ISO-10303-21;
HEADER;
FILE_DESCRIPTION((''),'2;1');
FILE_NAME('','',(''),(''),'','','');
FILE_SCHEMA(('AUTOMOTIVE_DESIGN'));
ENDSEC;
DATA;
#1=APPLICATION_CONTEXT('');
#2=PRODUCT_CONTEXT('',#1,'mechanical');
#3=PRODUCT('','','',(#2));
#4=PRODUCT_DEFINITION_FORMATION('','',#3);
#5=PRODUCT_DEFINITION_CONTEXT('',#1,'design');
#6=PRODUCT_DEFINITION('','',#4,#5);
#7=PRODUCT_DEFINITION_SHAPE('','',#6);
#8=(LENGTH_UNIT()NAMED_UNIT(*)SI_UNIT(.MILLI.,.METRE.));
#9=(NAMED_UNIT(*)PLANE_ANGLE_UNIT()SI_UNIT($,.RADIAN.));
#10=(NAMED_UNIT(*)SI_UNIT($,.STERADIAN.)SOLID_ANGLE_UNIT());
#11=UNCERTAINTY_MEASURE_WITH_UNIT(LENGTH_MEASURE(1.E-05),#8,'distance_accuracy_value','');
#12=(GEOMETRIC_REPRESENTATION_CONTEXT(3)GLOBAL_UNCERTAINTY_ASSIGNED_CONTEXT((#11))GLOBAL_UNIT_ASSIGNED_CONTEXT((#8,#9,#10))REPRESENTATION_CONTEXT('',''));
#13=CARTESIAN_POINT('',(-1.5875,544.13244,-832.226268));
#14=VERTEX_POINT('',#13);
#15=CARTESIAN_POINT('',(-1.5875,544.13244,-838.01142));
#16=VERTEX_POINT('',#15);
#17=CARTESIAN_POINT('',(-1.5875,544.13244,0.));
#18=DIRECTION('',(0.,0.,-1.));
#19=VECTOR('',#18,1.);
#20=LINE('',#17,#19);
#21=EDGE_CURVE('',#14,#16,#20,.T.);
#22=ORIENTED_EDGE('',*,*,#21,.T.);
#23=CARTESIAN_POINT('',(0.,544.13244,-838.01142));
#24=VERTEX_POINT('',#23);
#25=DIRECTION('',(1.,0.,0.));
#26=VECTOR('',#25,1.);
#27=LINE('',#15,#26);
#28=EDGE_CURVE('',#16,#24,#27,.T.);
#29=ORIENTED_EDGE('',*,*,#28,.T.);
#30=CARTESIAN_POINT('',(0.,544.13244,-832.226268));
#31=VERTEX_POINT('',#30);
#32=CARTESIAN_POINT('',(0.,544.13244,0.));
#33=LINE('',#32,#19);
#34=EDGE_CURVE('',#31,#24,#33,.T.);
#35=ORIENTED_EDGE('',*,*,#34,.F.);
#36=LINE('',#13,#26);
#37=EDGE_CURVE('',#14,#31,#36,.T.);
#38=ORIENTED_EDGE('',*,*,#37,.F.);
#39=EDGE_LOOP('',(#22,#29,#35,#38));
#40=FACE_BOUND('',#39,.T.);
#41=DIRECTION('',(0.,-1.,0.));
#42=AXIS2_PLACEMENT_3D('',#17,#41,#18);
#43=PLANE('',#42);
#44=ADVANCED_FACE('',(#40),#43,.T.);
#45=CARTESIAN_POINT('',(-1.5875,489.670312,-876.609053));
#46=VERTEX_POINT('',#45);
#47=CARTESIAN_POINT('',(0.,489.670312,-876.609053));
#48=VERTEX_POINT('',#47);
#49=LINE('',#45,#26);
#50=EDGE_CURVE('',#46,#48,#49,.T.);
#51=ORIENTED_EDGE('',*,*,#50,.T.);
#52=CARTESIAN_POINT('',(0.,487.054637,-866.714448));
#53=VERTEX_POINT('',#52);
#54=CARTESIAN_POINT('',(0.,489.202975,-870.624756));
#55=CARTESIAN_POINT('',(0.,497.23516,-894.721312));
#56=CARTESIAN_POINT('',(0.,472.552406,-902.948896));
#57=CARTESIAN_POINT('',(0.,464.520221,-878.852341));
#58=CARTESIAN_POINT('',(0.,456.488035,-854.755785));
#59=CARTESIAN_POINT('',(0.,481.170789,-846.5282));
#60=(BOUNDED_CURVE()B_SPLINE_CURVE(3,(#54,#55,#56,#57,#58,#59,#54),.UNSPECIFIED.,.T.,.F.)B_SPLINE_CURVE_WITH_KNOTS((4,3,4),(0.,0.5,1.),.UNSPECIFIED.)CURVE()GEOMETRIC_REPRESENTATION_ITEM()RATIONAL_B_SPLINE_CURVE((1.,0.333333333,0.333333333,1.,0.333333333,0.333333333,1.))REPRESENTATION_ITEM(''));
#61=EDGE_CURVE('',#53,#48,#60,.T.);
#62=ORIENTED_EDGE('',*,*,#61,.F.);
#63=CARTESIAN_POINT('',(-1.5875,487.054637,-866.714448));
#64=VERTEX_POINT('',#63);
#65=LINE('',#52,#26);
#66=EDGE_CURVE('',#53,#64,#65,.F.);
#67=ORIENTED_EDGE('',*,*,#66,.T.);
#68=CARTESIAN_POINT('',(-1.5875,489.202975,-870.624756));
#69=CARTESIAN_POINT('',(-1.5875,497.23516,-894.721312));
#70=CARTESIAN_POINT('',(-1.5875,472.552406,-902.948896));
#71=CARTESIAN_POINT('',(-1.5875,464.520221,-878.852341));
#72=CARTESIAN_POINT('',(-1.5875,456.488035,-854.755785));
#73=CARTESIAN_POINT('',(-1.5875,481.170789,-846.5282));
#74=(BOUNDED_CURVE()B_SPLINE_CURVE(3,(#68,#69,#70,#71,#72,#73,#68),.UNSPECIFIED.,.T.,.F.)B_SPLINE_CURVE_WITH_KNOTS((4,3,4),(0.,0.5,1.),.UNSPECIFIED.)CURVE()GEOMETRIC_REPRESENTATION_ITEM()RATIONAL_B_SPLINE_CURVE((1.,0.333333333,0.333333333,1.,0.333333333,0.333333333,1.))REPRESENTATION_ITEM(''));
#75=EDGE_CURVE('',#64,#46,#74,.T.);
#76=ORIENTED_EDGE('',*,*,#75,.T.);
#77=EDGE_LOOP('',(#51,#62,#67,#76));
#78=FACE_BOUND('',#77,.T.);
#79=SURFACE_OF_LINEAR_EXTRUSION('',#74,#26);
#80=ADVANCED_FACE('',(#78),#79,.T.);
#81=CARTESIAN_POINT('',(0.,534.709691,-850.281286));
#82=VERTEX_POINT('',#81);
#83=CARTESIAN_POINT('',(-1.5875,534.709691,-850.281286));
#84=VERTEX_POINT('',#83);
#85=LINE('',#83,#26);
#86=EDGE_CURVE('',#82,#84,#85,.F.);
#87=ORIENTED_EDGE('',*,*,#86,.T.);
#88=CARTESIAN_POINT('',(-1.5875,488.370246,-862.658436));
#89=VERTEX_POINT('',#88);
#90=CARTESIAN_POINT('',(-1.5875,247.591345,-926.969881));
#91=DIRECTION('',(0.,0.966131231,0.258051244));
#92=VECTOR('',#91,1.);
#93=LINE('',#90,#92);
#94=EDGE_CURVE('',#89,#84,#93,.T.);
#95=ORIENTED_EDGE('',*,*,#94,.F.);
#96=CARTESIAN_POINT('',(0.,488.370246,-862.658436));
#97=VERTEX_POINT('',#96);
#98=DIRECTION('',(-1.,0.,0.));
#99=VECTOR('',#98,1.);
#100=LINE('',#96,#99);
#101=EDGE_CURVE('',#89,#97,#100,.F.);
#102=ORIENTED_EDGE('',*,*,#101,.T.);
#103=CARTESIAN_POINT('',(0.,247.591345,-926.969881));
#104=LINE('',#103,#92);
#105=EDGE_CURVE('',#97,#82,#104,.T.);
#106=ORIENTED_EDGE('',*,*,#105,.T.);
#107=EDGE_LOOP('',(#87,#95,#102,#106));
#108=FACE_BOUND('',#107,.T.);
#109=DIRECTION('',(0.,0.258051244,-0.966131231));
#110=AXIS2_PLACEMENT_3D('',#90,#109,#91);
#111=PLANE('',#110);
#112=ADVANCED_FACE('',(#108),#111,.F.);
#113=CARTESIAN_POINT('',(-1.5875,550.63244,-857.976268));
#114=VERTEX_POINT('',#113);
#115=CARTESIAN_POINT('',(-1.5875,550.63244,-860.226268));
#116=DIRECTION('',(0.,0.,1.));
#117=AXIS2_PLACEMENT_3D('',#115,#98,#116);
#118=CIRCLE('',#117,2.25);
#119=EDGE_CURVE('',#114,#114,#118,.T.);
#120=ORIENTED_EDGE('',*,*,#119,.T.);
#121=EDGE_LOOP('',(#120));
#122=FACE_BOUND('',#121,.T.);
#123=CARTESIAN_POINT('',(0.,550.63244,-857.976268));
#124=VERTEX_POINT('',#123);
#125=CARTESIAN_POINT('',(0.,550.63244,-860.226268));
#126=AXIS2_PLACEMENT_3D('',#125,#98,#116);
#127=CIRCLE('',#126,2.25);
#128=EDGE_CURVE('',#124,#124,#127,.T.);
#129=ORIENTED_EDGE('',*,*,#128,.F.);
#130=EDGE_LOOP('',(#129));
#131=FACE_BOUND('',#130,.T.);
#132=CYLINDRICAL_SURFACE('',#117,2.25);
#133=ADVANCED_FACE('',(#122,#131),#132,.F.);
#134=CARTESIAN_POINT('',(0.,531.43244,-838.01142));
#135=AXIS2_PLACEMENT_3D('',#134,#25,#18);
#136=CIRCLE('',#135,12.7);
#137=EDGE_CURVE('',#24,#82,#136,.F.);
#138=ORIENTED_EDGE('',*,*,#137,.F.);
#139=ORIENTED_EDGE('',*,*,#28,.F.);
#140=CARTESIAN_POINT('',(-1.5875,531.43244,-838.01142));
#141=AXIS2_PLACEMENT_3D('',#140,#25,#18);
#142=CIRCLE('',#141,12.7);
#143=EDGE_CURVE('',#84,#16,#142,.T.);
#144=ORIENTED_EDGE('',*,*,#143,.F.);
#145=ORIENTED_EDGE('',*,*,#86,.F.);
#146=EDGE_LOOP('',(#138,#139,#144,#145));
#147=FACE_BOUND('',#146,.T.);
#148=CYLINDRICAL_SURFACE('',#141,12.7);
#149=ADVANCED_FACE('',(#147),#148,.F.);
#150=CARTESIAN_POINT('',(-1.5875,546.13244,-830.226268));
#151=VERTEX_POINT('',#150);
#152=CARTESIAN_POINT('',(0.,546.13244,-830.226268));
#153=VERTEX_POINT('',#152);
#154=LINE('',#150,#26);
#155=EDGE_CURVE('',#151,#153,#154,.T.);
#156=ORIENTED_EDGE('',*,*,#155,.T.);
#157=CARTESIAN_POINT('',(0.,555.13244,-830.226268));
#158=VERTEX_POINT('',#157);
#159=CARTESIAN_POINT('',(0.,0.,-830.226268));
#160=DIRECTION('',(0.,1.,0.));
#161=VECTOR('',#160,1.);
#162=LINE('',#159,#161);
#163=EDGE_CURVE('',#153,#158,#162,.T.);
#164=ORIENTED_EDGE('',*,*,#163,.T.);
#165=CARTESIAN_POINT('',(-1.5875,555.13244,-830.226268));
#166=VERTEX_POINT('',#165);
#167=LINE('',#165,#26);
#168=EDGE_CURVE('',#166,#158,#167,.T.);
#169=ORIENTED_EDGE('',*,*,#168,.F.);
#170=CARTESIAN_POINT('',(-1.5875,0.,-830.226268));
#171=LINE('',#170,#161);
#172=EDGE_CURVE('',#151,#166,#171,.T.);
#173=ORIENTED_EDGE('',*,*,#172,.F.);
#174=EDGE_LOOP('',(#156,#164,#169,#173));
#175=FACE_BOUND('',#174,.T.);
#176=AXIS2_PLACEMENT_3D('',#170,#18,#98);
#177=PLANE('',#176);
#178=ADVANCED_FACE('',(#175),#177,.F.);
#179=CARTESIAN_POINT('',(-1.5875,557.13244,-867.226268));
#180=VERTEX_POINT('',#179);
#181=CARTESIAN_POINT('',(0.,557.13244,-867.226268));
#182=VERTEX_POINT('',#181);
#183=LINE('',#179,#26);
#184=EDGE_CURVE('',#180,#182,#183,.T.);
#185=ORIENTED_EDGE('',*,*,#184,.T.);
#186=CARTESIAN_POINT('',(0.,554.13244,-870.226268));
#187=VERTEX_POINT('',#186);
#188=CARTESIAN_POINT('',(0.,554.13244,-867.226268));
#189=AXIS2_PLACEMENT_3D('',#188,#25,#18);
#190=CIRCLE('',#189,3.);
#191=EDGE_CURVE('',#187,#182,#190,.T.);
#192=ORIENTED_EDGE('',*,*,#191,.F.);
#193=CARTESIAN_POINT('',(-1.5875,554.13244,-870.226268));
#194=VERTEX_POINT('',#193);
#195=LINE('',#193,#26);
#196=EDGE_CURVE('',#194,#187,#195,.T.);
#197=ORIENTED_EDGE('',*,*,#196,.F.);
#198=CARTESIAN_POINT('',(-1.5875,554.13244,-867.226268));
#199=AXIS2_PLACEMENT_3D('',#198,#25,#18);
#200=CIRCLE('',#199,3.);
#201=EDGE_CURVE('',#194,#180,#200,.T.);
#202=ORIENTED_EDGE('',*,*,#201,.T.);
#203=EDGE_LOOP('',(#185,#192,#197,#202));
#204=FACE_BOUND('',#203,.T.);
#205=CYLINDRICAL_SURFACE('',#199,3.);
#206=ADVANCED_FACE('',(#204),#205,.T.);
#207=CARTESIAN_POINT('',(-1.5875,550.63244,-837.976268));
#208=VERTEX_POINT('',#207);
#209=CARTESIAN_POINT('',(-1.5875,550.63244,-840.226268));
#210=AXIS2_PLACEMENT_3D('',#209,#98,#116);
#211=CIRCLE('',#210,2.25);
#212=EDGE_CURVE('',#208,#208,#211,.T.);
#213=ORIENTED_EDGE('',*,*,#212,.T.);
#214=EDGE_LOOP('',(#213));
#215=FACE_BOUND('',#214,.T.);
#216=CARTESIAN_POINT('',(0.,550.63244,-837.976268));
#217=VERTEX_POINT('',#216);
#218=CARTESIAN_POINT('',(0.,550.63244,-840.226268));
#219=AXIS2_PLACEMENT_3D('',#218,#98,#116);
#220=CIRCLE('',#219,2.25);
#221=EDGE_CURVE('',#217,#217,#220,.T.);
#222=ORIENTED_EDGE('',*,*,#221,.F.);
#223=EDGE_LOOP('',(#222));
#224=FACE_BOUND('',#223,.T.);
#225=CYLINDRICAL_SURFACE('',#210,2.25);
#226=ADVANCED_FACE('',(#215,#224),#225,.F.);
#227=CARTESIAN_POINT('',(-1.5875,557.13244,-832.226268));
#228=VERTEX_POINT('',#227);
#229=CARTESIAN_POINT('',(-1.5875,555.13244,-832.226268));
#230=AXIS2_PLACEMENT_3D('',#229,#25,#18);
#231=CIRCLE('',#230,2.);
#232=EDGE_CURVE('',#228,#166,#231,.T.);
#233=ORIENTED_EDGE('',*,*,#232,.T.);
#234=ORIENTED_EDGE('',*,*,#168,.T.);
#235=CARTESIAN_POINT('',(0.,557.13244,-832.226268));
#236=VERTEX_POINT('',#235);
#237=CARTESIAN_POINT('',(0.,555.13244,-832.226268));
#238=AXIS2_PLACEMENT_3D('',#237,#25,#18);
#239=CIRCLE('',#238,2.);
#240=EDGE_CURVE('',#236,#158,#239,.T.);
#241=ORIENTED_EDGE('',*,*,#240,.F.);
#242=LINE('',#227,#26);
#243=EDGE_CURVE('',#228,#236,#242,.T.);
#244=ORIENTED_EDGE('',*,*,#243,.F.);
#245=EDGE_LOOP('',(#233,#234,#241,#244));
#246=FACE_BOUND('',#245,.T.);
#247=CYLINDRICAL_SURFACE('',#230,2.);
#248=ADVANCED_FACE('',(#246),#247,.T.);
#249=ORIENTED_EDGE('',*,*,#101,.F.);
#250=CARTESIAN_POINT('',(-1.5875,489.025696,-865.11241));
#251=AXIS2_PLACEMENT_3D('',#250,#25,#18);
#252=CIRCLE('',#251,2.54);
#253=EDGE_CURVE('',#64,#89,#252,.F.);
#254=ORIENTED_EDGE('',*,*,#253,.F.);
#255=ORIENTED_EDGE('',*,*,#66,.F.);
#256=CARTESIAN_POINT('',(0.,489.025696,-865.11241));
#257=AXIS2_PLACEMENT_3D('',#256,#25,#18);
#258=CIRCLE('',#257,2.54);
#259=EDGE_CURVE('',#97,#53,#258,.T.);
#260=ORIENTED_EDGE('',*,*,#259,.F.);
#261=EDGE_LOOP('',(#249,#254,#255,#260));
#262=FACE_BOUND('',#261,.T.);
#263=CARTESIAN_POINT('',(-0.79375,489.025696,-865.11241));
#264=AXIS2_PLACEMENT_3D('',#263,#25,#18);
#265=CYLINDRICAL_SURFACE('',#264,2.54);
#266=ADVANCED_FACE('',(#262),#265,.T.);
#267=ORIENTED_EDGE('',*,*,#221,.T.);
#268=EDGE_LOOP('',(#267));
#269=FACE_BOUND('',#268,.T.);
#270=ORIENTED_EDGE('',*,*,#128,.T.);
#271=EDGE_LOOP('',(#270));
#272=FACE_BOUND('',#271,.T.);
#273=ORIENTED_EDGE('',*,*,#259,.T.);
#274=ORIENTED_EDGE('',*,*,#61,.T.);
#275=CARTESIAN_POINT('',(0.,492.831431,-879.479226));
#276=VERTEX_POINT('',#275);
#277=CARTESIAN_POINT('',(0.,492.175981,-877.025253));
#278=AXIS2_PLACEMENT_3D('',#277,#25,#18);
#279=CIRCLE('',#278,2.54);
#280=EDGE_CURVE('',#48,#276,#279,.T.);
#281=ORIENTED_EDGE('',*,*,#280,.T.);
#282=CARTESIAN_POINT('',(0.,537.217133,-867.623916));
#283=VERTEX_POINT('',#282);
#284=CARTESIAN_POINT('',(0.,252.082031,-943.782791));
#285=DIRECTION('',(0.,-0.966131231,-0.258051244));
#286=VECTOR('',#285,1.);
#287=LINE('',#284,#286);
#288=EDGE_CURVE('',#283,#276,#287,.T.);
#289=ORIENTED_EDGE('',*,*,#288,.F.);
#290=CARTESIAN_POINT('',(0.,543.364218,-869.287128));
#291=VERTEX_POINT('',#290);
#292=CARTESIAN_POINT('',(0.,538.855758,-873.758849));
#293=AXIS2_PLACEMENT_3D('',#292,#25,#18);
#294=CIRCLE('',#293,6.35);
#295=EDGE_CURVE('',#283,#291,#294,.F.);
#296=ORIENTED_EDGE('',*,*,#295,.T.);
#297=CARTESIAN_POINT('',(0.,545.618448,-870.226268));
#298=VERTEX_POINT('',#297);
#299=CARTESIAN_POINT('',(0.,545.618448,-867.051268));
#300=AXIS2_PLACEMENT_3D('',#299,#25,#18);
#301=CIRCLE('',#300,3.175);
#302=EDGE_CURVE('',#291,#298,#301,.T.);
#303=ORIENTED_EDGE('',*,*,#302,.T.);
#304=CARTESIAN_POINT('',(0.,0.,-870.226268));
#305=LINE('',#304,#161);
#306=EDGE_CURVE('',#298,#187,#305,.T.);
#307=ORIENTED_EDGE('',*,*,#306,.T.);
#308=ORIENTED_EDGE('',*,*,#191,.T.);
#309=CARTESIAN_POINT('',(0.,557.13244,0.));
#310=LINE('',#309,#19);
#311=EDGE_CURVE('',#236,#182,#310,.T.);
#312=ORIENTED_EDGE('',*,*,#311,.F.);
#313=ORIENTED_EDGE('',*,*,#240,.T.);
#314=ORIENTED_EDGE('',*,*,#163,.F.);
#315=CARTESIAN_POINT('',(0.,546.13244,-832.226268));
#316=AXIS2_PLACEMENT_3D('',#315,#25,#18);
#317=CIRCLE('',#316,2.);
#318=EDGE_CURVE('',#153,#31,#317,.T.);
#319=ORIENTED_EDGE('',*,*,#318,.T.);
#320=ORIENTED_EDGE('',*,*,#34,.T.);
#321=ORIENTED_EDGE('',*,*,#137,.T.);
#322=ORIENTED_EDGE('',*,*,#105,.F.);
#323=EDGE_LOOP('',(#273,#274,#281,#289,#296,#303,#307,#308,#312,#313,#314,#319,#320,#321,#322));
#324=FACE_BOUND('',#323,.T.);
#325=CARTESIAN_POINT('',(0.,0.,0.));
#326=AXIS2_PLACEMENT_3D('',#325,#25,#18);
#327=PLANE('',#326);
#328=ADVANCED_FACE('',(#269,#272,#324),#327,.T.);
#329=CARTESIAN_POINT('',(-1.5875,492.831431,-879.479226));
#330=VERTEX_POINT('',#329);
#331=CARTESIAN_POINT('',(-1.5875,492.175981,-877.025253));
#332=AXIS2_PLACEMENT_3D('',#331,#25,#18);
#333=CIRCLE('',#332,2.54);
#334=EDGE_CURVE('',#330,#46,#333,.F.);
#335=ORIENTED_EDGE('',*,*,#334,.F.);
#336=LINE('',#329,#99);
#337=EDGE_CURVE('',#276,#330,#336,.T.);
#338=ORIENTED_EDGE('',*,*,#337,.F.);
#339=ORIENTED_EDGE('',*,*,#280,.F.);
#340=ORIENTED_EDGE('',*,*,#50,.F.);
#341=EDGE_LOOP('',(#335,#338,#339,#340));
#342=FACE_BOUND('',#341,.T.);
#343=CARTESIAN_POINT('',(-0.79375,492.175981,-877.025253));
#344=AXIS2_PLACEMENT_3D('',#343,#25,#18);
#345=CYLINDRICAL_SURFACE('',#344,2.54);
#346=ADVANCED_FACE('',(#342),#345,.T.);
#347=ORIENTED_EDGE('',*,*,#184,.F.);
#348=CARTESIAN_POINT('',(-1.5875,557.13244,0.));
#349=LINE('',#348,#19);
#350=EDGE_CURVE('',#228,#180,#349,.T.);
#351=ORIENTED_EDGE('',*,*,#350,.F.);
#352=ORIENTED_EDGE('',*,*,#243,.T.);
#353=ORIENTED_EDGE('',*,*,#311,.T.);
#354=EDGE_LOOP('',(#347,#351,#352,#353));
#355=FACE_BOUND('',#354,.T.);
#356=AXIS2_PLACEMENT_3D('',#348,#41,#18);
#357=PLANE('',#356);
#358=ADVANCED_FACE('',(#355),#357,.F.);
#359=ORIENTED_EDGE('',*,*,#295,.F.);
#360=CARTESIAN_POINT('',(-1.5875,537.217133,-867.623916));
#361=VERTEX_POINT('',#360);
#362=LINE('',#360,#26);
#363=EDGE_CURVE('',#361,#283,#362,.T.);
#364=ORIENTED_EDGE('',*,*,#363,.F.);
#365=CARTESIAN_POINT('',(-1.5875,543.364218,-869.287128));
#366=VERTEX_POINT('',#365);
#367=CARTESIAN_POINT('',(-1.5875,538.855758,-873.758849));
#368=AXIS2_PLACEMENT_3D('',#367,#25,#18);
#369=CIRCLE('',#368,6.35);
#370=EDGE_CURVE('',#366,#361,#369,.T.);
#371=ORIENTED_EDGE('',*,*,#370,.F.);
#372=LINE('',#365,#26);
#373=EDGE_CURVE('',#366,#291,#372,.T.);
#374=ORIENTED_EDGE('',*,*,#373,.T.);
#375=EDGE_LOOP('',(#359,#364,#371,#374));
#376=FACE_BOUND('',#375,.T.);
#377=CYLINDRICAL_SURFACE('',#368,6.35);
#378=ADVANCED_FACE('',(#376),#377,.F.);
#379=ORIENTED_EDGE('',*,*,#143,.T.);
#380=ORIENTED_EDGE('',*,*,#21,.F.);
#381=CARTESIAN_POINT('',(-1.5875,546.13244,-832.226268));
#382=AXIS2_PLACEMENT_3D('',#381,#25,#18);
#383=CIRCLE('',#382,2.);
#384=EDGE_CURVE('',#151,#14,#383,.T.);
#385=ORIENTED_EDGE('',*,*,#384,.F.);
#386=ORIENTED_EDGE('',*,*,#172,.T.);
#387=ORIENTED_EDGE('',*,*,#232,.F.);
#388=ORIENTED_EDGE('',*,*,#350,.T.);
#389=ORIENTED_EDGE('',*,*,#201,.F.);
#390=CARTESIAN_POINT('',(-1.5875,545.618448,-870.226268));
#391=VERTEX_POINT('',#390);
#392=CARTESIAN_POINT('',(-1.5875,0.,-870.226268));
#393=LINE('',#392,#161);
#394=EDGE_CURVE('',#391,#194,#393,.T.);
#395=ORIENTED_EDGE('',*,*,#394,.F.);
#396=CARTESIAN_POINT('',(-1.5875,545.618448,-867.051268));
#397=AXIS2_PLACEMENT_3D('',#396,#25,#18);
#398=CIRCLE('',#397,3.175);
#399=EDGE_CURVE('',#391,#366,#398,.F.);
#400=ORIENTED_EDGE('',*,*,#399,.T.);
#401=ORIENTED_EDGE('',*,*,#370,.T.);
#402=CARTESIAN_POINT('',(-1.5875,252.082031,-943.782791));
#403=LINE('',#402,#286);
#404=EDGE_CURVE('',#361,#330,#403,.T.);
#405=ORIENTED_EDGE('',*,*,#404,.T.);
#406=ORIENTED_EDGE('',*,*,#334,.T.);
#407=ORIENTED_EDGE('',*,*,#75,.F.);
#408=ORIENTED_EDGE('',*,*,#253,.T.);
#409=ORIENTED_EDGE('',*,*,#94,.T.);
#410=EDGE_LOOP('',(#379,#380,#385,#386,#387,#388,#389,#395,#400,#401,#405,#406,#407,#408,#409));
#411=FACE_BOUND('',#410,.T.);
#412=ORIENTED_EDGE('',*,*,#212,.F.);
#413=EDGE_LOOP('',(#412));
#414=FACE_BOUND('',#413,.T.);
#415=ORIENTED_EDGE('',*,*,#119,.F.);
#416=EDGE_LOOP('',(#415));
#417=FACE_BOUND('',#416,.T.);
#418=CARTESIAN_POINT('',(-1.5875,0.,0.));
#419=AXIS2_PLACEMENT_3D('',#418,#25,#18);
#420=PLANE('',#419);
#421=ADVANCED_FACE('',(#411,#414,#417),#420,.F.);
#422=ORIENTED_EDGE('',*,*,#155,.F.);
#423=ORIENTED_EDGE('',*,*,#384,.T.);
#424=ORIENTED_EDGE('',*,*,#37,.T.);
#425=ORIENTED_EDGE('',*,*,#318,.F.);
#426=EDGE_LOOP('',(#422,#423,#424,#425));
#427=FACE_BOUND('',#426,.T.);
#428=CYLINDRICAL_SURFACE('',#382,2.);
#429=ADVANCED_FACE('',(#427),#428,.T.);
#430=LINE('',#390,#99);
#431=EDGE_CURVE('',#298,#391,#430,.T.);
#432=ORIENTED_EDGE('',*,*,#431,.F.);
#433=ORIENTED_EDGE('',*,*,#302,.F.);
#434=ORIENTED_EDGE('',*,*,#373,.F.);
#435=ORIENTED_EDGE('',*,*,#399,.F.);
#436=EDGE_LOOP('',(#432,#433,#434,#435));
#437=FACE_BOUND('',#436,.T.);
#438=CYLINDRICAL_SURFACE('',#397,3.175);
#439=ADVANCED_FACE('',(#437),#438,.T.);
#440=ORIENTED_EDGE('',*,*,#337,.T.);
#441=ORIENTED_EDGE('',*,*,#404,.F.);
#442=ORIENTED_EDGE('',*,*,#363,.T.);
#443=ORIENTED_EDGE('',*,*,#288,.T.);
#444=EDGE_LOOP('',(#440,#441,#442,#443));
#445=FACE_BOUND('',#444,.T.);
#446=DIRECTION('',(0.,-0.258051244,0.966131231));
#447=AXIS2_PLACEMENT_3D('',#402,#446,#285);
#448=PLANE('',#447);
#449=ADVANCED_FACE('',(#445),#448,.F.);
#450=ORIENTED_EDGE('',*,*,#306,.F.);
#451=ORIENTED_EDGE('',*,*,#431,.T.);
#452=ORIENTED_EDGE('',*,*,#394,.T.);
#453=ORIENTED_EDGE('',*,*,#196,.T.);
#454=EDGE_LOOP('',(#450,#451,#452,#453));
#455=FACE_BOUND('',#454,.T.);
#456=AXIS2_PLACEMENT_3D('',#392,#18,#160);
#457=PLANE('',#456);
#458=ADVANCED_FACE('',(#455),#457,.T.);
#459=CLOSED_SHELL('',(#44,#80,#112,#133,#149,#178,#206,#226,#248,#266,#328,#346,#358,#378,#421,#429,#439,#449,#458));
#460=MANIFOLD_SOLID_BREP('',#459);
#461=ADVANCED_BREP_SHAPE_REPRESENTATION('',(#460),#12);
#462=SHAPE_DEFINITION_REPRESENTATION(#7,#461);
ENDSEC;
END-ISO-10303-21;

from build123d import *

# Parameters (mm, degrees)
BOSS_EXTRUDE1_DEPTH  = 1.5875
FILLET1_R            = 2.54
M4_CLEARANCE_HOLE1_D = 4.5
FILLET2_R            = 6.35
FILLET3_R            = 12.7
FILLET4_R            = 3.175


with BuildPart() as part:
    # Sketch1 → Boss-Extrude1 (new body)
    with BuildSketch(Plane(origin=(0, 0, 0), x_dir=(0, 0, -1), z_dir=(1, 0, 0))):
        with BuildLine():
            Line((832.226267655, 544.132439772), (843.624269089, 544.132439772))
            Line((843.624269089, 544.132439772), (847.764493389, 544.132439772))
            Line((847.764493389, 544.132439772), (865.776854812, 544.132439772))
            Line((865.776854812, 544.132439772), (869.917079112, 544.132439772))
            Line((869.917079112, 544.132439772), (870.226267655, 544.132439772))
            Line((870.226267655, 544.132439772), (870.226267655, 554.132439772))
            ThreePointArc((870.226267655, 554.132439772), (869.347587998, 556.253760115), (867.226267655, 557.132439772))
            Line((867.226267655, 557.132439772), (832.226267655, 557.132439772))
            ThreePointArc((832.226267655, 557.132439772), (830.812054092, 556.546653334), (830.226267655, 555.132439772))
            Line((830.226267655, 555.132439772), (830.226267655, 546.132439772))
            ThreePointArc((830.226267655, 546.132439772), (830.812054092, 544.718226209), (832.226267655, 544.132439772))
        make_face()
        with BuildLine():
            Line((847.764493389, 544.132439772), (863.880128333, 483.796291029))
            add(Edge.make_bspline(
                [(863.880128333, 483.796291029), (865.574478469, 486.592797057), (868.03804251, 488.340736874), (870.62475601, 489.202974707)],
                knots=[0.867438588, 0.867438588, 0.867438588, 0.867438588, 1, 1, 1, 1], degree=3, weights=[0.610334575, 0.693362976, 0.82325145, 1]))
            add(Edge.make_bspline(
                [(870.62475601, 489.202974707), (873.662795809, 490.21565464), (877.265107333, 490.148897283), (880.706436997, 488.236814526)],
                knots=[0, 0, 0, 0, 0.151032869, 0.151032869, 0.151032869, 0.151032869], degree=3, weights=[1, 0.798622841, 0.658074822, 0.578355943]))
            Line((880.706436997, 488.236814526), (865.776854812, 544.132439772))
            Line((865.776854812, 544.132439772), (847.764493389, 544.132439772))
        make_face()
    extrude(amount=-BOSS_EXTRUDE1_DEPTH)

    # Fillet1
    fillet1_edges = [part.edges().sort_by_distance(p)[0] for p in [
        (-0.79375, 488.236814526, -880.706436997),
        (-0.79375, 483.796291029, -863.880128333),
    ]]
    fillet(fillet1_edges, radius=FILLET1_R)

    # M4 Clearance Hole1 (through all)
    with Locations(Plane.ZY.offset(1.5875)):
        with Locations((-860.226267655, 550.632439772), (-840.226267655, 550.632439772)):
            Hole(M4_CLEARANCE_HOLE1_D / 2)

    # Fillet2
    # the kernel refuses this fillet: 6.35 mm, written as the material it adds along each edge
    with BuildSketch(Plane(origin=(0, 544.132439772, -865.776854812), x_dir=(0, -0.9661312310415323, -0.25805124376017496), z_dir=(-1, 0, 0))) as fillet2_piece_1:
        with BuildLine():
            CenterArc((7.157730316, -6.35), FILLET2_R, 90, 71.153326235)
            Line((1.148176518, -4.298716707), (1.027985442, -4.257691041))
            ThreePointArc((1.027985442, -4.257691041), (0.451389593, -2.182130862), (-0.122698666, -0.032772508))
            Line((-0.122698666, -0.032772508), (0, 0.127))
            Line((0, 0.127), (7.157730316, 0.127))
            Line((7.157730316, 0.127), (7.157730316, 0))
        make_face()
    extrude(amount=1.5875)

    # Fillet3
    fillet3_edges = [part.edges().sort_by_distance(p)[0] for p in [
        (-0.79375, 544.132439772, -847.764493389),
    ]]
    fillet(fillet3_edges, radius=FILLET3_R)

    # Fillet4
    fillet4_edges = [part.edges().sort_by_distance(p)[0] for p in [
        (-0.79375, 544.132439772, -870.226267655),
    ]]
    fillet(fillet4_edges, radius=FILLET4_R)


solid = part.part
